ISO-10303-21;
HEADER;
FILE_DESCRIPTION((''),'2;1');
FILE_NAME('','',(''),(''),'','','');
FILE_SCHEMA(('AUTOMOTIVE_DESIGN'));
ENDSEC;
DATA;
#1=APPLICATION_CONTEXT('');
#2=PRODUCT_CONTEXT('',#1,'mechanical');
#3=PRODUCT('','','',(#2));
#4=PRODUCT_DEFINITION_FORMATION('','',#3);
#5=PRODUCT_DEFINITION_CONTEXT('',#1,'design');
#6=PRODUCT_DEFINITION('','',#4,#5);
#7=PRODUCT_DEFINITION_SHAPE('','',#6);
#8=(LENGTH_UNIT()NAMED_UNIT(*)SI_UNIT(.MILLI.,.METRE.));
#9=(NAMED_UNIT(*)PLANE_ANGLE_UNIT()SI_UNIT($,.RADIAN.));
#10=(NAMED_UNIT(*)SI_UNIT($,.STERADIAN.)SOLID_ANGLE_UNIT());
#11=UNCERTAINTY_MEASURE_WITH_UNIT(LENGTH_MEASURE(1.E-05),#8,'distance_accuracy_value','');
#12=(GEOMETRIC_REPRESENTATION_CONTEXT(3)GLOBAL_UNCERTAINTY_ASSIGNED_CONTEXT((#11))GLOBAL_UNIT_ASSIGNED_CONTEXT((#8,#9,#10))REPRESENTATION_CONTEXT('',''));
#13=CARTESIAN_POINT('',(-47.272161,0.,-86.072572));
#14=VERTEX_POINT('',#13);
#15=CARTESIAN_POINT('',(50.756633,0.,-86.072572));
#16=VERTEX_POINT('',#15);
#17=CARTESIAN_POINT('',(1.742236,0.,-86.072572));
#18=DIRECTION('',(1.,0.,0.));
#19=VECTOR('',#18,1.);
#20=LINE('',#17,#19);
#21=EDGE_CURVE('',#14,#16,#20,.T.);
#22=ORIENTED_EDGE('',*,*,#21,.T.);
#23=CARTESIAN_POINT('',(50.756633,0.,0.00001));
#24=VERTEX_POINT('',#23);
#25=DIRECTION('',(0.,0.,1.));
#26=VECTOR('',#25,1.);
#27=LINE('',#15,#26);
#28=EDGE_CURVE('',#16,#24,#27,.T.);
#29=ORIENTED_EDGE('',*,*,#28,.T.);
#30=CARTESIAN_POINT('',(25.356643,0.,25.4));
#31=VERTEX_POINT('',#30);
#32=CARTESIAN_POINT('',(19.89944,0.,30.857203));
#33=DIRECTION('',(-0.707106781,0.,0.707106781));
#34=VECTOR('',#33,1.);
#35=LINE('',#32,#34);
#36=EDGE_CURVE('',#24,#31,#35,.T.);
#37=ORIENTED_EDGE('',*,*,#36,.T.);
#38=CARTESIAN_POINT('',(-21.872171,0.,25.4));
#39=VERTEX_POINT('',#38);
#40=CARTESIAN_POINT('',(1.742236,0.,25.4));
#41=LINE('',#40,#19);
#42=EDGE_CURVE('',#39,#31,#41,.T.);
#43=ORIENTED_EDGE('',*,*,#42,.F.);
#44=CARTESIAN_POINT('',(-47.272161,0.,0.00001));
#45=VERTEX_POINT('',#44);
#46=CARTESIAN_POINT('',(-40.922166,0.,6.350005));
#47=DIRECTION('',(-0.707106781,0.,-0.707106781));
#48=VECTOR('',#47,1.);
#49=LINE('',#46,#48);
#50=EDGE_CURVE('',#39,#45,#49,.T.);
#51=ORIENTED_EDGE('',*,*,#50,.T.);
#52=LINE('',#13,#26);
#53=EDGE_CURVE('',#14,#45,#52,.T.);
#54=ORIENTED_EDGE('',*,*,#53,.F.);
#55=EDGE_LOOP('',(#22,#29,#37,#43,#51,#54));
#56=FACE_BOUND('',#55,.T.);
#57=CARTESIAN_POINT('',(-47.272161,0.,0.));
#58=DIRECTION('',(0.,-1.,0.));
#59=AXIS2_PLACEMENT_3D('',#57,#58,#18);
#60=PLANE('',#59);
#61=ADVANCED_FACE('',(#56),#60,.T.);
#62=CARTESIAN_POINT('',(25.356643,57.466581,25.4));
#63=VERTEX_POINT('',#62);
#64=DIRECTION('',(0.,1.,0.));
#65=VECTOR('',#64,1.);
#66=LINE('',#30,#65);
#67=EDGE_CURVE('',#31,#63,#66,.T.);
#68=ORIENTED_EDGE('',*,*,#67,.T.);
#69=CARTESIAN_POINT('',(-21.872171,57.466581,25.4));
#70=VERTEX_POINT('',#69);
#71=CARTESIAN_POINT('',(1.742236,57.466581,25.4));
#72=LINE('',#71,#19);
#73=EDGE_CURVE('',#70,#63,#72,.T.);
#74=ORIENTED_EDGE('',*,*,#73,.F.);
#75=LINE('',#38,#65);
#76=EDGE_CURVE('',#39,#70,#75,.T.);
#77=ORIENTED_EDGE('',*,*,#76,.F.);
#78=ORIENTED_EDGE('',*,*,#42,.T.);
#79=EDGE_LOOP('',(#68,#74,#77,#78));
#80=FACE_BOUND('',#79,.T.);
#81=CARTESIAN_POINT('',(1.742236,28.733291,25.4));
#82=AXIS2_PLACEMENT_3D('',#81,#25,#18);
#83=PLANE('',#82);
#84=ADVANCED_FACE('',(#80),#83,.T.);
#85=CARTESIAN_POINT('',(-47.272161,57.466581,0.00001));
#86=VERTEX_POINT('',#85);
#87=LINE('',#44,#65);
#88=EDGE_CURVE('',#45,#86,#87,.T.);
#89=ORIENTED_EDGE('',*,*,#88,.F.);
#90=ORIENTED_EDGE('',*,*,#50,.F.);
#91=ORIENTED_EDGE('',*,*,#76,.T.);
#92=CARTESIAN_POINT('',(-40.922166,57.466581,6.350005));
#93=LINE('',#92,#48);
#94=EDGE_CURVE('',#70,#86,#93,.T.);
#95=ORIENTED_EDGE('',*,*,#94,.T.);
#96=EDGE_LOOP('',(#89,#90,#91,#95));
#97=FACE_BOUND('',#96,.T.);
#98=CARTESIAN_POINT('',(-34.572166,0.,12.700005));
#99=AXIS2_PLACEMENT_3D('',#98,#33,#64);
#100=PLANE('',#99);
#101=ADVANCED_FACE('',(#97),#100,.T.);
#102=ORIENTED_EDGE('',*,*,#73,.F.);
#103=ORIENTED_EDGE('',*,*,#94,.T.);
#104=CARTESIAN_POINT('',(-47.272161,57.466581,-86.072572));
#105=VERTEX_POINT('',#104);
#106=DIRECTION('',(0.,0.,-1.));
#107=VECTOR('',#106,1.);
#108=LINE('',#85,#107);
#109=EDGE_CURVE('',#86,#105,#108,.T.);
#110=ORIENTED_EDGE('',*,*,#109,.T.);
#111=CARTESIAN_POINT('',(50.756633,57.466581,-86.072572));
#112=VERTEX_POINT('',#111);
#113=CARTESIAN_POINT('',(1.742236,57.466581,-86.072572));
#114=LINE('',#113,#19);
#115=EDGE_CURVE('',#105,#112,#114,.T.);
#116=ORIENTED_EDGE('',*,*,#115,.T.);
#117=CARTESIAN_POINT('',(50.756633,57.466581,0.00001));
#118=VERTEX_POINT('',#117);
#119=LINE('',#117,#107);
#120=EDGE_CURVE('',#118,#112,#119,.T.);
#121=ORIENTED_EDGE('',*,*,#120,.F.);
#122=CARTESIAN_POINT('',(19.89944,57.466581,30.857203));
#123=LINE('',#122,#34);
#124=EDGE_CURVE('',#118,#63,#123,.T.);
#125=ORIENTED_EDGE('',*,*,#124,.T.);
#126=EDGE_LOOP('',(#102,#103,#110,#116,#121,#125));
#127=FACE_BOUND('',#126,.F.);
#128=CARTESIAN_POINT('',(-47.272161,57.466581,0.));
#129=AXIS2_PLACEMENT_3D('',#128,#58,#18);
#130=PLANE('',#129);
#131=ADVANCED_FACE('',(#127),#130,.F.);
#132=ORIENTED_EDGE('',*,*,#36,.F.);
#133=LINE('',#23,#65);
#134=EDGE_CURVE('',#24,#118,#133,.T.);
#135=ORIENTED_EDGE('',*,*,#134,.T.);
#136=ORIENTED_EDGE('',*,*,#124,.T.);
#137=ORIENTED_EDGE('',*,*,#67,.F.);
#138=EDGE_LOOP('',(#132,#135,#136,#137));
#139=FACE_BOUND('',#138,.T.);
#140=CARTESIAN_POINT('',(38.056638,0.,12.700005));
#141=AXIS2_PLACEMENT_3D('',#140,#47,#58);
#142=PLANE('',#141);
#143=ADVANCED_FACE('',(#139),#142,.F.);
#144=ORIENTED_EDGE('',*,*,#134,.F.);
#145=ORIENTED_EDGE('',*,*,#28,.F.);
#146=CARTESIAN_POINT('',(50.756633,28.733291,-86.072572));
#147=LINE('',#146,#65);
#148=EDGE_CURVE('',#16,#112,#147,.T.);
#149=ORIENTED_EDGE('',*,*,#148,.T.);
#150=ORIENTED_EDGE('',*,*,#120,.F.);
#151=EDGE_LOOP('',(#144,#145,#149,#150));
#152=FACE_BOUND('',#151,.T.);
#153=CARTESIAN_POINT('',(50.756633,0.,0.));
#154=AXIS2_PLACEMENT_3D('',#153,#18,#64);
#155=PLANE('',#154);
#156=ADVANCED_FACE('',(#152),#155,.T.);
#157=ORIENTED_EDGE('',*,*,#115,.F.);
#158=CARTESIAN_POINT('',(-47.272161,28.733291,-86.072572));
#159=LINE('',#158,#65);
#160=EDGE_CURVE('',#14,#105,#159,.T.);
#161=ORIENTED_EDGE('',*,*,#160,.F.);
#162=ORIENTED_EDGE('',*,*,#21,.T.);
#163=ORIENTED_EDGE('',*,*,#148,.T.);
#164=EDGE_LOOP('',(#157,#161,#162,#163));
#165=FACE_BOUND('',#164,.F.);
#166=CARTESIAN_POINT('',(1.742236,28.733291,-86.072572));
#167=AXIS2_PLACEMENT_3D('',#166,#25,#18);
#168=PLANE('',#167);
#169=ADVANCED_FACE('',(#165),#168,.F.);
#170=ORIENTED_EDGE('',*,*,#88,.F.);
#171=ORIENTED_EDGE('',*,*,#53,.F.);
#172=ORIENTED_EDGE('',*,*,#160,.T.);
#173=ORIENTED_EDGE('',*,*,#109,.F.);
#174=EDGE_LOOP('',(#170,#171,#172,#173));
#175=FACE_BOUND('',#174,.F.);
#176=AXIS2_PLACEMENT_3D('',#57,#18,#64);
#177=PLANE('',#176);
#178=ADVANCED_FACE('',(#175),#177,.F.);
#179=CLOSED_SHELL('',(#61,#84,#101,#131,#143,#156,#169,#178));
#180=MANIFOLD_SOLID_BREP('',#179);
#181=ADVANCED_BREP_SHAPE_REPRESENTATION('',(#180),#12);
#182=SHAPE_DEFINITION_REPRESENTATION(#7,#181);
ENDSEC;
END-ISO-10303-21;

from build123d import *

# Parameters (mm, degrees)
F0_W     = 98.028793931
F0_H     = 57.4665814638
F1_DEPTH = 25.4
F2_SIZE  = 25.39999
F3_SIZE  = 25.39999
F4_DEPTH = 86.0725715756


# Not quite as in the source:
# - a fillet or chamfer is up to 0.001 mm smaller than in the source, because OpenCascade refuses the exact size


with BuildPart() as f1:
    # F0 (on Top) → F1 (new body)
    with BuildSketch(Plane.XY):
        with Locations((1.7422363162, 28.7332907319)):
            Rectangle(F0_W, F0_H)
    extrude(amount=F1_DEPTH)

    # F2 (size 25.4 in the source; OpenCascade refuses exactly that, so slightly less here)
    f2_edges = [f1.edges().sort_by_distance(p)[0] for p in [
        (50.756633, 28.733291, 25.4),
    ]]
    chamfer(f2_edges, length=F2_SIZE)

    # F3 (size 25.4 in the source; OpenCascade refuses exactly that, so slightly less here)
    f3_edges = [f1.edges().sort_by_distance(p)[0] for p in [
        (-47.272161, 28.733291, 25.4),
    ]]
    chamfer(f3_edges, length=F3_SIZE)

    # F4 (add): a face of the model
    f4_faces = [f1.faces().sort_by_distance(p)[0] for p in [
        (1.7422363162, 28.7332907319, 0),
    ]]
    extrude(f4_faces, amount=F4_DEPTH)


solid = f1.part
